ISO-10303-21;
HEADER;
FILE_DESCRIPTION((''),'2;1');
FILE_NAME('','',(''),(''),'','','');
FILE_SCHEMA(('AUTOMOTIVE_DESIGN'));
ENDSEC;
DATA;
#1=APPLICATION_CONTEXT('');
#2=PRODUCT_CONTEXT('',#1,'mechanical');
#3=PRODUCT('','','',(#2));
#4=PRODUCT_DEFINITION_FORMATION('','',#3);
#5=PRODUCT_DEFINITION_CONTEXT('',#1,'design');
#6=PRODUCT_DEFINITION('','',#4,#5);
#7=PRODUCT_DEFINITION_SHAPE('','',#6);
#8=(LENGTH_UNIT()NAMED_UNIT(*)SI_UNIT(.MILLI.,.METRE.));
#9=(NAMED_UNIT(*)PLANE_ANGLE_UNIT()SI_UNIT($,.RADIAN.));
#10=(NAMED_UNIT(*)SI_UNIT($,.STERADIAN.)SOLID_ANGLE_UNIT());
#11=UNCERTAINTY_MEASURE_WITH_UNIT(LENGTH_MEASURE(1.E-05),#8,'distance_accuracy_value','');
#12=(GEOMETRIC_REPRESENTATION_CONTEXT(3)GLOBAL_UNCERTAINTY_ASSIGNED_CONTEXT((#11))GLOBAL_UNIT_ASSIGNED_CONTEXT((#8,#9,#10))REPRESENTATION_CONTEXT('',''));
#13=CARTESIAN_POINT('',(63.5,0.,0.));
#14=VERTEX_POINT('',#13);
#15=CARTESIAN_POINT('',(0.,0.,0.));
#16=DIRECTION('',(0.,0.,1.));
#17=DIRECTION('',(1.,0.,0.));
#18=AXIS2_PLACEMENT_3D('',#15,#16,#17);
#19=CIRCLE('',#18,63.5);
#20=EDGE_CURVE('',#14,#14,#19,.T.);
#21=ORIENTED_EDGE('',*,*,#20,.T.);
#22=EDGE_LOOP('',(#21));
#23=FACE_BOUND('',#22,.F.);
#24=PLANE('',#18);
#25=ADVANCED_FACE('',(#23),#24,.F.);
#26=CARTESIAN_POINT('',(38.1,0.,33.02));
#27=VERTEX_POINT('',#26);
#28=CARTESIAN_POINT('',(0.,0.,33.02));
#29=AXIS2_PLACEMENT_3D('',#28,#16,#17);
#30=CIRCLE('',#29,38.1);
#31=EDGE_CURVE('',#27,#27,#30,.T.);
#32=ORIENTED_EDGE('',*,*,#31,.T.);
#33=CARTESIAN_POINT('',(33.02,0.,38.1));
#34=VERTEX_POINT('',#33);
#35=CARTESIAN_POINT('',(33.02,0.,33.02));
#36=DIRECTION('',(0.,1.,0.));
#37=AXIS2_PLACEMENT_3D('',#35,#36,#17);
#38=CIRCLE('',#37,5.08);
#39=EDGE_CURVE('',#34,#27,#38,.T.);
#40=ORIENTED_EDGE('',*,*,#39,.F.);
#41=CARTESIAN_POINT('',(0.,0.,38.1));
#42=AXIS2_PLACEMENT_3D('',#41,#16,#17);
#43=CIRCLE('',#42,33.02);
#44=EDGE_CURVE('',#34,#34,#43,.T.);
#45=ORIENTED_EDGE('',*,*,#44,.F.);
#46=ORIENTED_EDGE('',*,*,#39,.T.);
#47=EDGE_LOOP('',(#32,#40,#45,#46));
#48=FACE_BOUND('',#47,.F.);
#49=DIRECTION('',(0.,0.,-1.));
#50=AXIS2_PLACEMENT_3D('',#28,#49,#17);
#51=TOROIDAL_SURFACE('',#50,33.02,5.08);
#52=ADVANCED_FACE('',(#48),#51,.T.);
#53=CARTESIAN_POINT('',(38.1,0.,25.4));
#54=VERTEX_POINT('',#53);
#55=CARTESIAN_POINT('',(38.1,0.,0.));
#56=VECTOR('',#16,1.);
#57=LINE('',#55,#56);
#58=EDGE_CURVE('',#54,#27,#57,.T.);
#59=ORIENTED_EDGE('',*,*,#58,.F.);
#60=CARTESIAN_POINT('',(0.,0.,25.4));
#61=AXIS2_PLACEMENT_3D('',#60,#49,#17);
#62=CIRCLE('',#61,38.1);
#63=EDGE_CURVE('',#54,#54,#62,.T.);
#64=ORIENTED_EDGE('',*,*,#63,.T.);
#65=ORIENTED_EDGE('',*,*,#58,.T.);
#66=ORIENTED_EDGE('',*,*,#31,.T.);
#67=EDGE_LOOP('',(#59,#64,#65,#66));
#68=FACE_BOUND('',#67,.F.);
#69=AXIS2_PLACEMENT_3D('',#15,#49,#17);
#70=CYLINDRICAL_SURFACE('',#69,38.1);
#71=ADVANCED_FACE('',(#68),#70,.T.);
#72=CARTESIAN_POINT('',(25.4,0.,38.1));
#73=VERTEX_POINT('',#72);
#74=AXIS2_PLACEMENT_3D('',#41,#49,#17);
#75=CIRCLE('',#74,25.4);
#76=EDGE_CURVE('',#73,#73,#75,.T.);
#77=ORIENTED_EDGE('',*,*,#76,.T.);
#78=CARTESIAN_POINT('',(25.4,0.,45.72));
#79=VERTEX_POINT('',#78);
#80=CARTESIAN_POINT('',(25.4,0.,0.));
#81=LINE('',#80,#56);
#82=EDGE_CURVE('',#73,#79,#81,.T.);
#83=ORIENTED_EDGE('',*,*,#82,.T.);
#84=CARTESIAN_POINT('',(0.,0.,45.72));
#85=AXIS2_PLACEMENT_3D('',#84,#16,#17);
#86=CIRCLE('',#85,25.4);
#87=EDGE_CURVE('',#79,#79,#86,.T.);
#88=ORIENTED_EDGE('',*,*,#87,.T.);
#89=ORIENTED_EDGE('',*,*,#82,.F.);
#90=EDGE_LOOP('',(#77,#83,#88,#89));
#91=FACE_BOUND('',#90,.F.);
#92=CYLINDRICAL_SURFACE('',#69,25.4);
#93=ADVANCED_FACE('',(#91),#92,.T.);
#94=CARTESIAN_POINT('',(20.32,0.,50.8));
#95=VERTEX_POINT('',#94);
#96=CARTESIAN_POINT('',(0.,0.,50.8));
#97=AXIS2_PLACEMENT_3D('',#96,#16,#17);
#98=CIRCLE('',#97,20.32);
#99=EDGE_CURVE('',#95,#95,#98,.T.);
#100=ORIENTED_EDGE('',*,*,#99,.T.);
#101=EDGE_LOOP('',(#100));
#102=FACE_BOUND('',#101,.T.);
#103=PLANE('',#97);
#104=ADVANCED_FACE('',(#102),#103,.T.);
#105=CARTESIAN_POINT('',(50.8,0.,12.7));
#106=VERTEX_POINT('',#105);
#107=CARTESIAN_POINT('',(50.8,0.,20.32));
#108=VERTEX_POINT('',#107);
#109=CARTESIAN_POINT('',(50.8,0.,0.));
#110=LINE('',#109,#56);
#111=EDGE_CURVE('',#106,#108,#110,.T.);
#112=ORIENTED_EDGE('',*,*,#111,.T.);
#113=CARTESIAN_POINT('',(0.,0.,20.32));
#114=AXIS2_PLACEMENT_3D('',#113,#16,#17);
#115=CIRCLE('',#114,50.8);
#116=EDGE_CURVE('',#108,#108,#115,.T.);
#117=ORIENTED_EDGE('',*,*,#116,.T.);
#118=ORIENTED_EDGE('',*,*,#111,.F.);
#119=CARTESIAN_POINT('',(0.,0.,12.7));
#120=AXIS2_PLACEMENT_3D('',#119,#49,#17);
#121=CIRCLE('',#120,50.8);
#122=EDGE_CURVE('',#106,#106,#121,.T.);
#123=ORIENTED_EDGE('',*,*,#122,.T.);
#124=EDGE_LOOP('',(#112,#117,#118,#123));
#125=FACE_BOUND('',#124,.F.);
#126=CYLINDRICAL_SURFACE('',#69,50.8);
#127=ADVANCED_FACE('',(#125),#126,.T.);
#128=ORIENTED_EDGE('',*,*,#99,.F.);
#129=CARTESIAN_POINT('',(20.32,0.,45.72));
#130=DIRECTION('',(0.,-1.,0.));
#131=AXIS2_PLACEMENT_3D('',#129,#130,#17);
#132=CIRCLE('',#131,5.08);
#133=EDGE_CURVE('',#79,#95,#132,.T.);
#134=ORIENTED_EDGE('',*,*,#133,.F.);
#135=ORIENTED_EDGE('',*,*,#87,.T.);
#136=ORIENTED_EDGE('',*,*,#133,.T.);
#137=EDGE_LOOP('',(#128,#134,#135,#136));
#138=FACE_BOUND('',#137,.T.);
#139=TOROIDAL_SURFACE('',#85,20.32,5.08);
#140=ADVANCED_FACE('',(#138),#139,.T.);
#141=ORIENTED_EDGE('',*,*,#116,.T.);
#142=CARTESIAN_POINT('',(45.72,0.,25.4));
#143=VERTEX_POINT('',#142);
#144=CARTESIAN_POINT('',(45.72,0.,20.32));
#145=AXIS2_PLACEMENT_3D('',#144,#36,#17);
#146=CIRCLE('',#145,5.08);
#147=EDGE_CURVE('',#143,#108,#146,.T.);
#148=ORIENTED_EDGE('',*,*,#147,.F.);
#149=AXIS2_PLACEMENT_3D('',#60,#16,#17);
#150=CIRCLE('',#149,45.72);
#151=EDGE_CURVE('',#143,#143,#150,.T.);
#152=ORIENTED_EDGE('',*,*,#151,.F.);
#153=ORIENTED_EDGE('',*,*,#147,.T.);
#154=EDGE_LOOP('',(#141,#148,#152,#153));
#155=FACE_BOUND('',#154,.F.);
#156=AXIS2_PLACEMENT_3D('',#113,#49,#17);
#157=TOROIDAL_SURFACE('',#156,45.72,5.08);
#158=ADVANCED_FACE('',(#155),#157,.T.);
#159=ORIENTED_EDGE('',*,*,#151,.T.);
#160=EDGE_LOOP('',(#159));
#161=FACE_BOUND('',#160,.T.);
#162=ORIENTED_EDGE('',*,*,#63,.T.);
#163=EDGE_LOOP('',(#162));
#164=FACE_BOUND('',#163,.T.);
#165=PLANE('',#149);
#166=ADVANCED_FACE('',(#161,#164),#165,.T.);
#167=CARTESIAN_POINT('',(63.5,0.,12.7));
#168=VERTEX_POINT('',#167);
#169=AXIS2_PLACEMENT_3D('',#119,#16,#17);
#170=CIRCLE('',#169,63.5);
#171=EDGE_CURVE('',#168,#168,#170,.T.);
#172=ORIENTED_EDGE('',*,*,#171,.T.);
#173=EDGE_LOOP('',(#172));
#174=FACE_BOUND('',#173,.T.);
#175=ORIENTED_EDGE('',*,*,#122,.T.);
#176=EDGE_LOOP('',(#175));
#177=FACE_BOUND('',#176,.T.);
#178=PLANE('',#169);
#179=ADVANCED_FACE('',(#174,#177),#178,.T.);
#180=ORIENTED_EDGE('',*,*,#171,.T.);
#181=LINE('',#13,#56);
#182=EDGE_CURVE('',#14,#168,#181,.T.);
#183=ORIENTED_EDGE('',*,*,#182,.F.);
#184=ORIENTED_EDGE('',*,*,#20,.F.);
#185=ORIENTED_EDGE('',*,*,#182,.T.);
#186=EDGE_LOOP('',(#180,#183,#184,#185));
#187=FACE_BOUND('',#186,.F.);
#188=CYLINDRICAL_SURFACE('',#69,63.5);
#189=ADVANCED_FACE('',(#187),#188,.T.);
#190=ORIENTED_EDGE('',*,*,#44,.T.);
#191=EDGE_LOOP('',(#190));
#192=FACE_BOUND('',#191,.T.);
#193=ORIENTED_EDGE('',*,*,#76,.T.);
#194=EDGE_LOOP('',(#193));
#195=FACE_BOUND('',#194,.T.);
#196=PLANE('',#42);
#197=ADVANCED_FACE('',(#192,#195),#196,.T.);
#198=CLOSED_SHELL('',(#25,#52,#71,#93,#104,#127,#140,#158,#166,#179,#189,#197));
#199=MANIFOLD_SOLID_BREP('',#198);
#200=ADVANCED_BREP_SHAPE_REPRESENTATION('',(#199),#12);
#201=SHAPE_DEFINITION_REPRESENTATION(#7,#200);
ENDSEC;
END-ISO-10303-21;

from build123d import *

# Parameters (mm, degrees)
F0_R     = 63.5
F1_DEPTH = 12.7
F4_R     = 50.8
F5_DEPTH = 25.4
F6_R     = 38.1
F7_DEPTH = 38.1
F8_R     = 25.4
F9_DEPTH = 50.8
F10_R    = 5.08
F11_R    = 5.08
F12_R    = 5.08


# Not quite as in the source:
# - the program builds the solid bodies; features that only make, move or delete a surface that nothing else refers to are left out


with BuildPart() as f1:
    # F0 (on Top) → F1 (new body)
    with BuildSketch(Plane.XY):
        Circle(F0_R)
    extrude(amount=F1_DEPTH)

    # F4 (on Top) → F5 (join)
    with BuildSketch(Plane.XY):
        Circle(F4_R)
    extrude(amount=F5_DEPTH)

    # F6 (on Top) → F7 (join)
    with BuildSketch(Plane.XY):
        Circle(F6_R)
    extrude(amount=F7_DEPTH)

    # F8 (on Top) → F9 (join)
    with BuildSketch(Plane.XY):
        Circle(F8_R)
    extrude(amount=F9_DEPTH)

    # F10
    f10_edges = [f1.edges().sort_by_distance(p)[0] for p in [
        (-25.4, 0, 50.8),
    ]]
    fillet(f10_edges, radius=F10_R)

    # F11
    f11_edges = [f1.edges().sort_by_distance(p)[0] for p in [
        (-38.1, 0, 38.1),
    ]]
    fillet(f11_edges, radius=F11_R)

    # F12
    f12_edges = [f1.edges().sort_by_distance(p)[0] for p in [
        (-50.8, 0, 25.4),
    ]]
    fillet(f12_edges, radius=F12_R)


solid = f1.part
